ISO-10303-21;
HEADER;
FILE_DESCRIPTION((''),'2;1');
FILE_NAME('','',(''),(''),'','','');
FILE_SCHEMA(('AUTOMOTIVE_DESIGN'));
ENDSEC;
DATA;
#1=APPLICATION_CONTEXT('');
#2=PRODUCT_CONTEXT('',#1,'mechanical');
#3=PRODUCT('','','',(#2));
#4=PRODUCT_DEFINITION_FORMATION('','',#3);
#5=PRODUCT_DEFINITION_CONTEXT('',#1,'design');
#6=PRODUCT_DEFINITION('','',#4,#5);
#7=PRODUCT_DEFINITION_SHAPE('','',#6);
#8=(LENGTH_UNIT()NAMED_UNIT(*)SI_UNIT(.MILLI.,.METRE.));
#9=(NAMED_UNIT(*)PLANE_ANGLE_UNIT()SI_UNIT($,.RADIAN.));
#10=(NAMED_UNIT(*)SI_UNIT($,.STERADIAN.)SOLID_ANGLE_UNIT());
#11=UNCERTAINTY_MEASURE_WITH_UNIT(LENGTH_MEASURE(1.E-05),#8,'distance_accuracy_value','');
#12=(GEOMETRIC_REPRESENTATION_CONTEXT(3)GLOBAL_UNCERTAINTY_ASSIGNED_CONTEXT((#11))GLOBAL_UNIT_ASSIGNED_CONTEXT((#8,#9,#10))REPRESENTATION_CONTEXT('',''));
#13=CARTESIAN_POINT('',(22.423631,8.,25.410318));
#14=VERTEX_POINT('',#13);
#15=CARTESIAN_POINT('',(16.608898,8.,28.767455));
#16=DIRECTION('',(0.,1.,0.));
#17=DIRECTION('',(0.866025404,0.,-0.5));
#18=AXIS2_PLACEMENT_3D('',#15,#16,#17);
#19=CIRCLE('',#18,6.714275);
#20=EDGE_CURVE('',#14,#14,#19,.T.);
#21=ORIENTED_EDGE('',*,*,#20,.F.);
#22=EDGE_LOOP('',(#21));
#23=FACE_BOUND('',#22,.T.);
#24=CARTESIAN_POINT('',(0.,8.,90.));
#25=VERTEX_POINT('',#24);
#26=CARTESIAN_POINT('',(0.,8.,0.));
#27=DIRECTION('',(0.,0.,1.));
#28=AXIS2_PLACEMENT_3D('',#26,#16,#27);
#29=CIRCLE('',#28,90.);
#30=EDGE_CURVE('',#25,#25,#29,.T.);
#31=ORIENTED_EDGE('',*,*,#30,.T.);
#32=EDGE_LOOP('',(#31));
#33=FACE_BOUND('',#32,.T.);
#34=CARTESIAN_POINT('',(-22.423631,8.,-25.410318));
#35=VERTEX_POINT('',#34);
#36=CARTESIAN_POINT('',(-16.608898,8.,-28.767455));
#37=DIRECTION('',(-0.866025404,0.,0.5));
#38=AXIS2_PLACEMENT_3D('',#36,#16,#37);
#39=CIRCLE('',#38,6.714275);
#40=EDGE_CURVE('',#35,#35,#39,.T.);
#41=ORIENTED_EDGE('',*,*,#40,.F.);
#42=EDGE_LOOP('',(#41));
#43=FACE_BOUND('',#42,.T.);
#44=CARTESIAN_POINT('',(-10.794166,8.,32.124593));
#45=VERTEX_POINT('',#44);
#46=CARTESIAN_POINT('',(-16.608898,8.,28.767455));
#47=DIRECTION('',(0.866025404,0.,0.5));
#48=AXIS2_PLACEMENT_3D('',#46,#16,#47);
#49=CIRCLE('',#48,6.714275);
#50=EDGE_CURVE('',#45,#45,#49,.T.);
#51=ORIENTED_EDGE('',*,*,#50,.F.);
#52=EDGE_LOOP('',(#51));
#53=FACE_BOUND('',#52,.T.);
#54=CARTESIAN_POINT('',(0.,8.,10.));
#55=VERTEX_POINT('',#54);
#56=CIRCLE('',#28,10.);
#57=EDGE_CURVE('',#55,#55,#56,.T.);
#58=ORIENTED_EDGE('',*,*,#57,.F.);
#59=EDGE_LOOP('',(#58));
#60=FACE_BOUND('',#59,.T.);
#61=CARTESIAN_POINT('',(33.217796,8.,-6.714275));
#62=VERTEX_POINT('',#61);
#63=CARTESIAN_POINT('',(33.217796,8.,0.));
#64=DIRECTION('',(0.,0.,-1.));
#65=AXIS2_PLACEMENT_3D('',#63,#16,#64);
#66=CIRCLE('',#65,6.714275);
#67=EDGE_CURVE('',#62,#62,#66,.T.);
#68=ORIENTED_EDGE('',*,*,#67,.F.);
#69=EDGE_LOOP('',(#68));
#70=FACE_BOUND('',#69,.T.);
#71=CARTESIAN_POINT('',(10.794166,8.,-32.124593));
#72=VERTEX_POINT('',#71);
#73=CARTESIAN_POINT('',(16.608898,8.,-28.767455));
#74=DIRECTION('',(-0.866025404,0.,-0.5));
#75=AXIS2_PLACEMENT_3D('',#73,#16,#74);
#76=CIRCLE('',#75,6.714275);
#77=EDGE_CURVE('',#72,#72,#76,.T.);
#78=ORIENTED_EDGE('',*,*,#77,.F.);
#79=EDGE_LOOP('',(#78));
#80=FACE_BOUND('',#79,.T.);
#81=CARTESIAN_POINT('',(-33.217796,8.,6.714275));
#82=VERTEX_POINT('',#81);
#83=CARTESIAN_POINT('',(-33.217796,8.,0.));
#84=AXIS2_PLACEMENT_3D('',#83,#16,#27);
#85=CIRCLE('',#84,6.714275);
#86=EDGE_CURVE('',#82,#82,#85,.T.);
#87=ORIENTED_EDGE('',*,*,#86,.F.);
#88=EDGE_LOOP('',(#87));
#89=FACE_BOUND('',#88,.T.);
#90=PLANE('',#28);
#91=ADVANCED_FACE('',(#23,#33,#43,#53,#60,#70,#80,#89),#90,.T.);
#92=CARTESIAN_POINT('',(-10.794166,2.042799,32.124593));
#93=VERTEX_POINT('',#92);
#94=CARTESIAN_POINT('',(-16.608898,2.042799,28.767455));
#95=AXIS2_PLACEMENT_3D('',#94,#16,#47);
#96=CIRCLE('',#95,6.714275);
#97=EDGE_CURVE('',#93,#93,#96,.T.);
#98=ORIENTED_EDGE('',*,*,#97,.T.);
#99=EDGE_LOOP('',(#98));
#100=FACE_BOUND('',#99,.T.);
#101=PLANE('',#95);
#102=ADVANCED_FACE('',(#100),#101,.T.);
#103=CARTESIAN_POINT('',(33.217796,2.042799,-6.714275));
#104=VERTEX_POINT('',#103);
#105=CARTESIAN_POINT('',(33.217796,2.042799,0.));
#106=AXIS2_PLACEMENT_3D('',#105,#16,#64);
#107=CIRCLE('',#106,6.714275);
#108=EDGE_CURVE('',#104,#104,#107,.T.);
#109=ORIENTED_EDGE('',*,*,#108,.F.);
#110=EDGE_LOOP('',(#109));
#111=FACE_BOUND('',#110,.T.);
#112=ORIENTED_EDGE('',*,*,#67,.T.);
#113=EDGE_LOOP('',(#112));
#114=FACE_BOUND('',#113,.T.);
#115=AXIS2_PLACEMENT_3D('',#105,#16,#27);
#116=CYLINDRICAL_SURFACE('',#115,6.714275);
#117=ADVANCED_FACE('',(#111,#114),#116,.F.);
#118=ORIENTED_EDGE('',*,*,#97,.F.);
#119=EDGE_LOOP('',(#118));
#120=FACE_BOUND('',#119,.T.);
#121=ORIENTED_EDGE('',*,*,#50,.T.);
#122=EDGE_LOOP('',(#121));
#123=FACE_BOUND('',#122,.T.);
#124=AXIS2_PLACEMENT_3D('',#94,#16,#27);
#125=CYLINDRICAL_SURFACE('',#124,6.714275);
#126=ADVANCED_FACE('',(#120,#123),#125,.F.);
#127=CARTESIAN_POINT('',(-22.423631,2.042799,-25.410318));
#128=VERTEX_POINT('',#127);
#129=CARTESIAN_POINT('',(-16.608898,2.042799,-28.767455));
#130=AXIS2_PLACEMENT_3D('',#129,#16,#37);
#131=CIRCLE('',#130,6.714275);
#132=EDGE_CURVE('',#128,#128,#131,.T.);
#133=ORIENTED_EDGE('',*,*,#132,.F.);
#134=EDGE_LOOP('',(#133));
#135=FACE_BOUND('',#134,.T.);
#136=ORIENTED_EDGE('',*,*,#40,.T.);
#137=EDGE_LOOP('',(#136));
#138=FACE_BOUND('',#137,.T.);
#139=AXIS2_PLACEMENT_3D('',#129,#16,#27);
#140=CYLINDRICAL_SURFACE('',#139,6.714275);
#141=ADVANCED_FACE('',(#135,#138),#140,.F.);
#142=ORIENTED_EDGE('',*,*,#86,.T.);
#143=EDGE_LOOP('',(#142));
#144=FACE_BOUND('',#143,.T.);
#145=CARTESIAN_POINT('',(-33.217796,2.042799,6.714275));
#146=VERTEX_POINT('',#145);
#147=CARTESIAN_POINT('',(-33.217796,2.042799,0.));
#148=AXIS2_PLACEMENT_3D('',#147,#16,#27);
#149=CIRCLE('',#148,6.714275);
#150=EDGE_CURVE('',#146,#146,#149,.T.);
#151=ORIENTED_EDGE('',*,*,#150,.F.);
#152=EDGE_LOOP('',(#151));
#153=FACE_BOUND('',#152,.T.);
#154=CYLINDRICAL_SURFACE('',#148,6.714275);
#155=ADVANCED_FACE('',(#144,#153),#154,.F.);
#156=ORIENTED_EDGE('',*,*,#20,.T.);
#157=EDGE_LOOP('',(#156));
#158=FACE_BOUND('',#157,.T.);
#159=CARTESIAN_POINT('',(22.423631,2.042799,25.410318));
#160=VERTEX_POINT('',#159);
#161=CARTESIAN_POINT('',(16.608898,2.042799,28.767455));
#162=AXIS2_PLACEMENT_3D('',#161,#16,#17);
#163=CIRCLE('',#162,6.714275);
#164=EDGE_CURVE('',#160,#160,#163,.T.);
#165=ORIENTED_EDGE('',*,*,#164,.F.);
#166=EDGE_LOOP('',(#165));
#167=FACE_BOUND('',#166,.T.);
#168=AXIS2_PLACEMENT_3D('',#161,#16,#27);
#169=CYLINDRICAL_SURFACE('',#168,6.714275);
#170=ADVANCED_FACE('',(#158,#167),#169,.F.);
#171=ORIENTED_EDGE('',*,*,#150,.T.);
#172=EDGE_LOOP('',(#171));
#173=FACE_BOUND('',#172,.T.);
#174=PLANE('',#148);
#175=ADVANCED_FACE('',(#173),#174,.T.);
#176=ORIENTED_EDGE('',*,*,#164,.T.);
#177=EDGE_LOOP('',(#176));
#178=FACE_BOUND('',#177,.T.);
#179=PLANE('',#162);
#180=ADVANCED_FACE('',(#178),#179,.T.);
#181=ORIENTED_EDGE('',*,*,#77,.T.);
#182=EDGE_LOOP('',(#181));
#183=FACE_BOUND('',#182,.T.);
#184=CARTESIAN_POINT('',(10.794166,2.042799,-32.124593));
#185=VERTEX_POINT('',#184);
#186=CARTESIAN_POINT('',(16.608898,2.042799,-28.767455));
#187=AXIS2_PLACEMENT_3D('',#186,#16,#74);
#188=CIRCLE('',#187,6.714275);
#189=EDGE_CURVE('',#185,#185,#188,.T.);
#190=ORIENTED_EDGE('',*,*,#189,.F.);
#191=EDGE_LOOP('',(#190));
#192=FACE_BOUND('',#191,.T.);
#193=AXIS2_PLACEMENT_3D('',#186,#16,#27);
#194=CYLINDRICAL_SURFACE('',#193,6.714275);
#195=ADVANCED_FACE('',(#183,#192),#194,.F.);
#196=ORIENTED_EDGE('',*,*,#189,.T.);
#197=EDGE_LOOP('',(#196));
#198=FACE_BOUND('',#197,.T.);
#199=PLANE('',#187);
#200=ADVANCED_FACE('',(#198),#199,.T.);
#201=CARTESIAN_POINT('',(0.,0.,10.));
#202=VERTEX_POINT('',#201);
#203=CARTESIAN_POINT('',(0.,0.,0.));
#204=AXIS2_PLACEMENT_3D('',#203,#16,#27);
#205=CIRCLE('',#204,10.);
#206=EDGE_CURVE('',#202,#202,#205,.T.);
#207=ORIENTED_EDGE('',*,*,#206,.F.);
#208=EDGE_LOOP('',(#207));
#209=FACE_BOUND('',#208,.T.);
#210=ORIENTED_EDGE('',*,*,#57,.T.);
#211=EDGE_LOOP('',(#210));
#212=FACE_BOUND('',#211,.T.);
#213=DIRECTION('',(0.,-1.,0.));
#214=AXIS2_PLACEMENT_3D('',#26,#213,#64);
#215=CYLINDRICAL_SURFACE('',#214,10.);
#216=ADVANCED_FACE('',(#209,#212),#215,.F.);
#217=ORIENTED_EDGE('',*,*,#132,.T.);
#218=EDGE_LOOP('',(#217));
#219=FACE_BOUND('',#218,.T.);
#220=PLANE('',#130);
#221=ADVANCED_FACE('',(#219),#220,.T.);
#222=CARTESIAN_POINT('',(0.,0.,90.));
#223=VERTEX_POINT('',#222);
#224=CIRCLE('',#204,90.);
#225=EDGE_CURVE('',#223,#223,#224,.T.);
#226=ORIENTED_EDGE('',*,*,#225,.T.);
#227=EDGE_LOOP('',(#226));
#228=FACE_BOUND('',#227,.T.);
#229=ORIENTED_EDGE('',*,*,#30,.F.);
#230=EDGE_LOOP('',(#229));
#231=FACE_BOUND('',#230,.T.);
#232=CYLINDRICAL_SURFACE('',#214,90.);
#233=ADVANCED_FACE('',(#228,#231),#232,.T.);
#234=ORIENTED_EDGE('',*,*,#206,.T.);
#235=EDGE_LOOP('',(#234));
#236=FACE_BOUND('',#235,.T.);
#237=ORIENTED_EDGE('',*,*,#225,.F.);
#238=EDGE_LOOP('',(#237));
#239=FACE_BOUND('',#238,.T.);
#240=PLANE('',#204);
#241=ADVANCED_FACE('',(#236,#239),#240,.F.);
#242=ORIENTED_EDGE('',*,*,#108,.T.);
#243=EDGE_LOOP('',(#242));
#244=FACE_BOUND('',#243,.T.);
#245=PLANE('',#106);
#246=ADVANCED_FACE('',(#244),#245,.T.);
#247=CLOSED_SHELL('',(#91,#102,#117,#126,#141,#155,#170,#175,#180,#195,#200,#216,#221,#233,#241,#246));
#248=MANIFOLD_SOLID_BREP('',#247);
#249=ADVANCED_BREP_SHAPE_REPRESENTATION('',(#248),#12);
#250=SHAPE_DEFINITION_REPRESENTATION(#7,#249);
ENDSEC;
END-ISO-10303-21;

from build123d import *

# Parameters (mm, degrees)
SKETCH1_R           = 90
BOSS_EXTRUDE1_DEPTH = 8
SKETCH2_R           = 10
CUT_EXTRUDE1_DEPTH  = 128.530388535
SKETCH3_R           = 6.71427462
CUT_EXTRUDE2_DEPTH  = 5.957200942
CIRPATTERN1_COUNT   = 6


with BuildPart() as part:
    # Sketch1 → Boss-Extrude1 (new body)
    with BuildSketch(Plane(origin=(0, 0, 0), x_dir=(1, 0, 0), z_dir=(0, 1, 0))):
        Circle(SKETCH1_R)
    extrude(amount=BOSS_EXTRUDE1_DEPTH)

    # Sketch2 → Cut-Extrude1 (cut, through all)
    with BuildSketch(Plane(origin=(0, 0, 0), x_dir=(1, 0, 0), z_dir=(0, 1, 0))):
        Circle(SKETCH2_R)
    extrude(amount=CUT_EXTRUDE1_DEPTH, mode=Mode.SUBTRACT)

    # Sketch3 → Cut-Extrude2 (cut)
    with BuildSketch(Plane(origin=(0, 8, 0), x_dir=(1, 0, 0), z_dir=(0, 1, 0))):
        with Locations((-33.217796335, 0)):
            Circle(SKETCH3_R)
    cut_extrude2 = extrude(amount=-CUT_EXTRUDE2_DEPTH, mode=Mode.SUBTRACT)

    # CirPattern1: Cut-Extrude2 ×6 about axis
    cirpattern1_axis = Axis((0, 0, 0), (0, 1, 0))
    for i in range(1, CIRPATTERN1_COUNT):
        add(cut_extrude2.rotate(cirpattern1_axis, i * 360 / CIRPATTERN1_COUNT), mode=Mode.SUBTRACT)


solid = part.part
